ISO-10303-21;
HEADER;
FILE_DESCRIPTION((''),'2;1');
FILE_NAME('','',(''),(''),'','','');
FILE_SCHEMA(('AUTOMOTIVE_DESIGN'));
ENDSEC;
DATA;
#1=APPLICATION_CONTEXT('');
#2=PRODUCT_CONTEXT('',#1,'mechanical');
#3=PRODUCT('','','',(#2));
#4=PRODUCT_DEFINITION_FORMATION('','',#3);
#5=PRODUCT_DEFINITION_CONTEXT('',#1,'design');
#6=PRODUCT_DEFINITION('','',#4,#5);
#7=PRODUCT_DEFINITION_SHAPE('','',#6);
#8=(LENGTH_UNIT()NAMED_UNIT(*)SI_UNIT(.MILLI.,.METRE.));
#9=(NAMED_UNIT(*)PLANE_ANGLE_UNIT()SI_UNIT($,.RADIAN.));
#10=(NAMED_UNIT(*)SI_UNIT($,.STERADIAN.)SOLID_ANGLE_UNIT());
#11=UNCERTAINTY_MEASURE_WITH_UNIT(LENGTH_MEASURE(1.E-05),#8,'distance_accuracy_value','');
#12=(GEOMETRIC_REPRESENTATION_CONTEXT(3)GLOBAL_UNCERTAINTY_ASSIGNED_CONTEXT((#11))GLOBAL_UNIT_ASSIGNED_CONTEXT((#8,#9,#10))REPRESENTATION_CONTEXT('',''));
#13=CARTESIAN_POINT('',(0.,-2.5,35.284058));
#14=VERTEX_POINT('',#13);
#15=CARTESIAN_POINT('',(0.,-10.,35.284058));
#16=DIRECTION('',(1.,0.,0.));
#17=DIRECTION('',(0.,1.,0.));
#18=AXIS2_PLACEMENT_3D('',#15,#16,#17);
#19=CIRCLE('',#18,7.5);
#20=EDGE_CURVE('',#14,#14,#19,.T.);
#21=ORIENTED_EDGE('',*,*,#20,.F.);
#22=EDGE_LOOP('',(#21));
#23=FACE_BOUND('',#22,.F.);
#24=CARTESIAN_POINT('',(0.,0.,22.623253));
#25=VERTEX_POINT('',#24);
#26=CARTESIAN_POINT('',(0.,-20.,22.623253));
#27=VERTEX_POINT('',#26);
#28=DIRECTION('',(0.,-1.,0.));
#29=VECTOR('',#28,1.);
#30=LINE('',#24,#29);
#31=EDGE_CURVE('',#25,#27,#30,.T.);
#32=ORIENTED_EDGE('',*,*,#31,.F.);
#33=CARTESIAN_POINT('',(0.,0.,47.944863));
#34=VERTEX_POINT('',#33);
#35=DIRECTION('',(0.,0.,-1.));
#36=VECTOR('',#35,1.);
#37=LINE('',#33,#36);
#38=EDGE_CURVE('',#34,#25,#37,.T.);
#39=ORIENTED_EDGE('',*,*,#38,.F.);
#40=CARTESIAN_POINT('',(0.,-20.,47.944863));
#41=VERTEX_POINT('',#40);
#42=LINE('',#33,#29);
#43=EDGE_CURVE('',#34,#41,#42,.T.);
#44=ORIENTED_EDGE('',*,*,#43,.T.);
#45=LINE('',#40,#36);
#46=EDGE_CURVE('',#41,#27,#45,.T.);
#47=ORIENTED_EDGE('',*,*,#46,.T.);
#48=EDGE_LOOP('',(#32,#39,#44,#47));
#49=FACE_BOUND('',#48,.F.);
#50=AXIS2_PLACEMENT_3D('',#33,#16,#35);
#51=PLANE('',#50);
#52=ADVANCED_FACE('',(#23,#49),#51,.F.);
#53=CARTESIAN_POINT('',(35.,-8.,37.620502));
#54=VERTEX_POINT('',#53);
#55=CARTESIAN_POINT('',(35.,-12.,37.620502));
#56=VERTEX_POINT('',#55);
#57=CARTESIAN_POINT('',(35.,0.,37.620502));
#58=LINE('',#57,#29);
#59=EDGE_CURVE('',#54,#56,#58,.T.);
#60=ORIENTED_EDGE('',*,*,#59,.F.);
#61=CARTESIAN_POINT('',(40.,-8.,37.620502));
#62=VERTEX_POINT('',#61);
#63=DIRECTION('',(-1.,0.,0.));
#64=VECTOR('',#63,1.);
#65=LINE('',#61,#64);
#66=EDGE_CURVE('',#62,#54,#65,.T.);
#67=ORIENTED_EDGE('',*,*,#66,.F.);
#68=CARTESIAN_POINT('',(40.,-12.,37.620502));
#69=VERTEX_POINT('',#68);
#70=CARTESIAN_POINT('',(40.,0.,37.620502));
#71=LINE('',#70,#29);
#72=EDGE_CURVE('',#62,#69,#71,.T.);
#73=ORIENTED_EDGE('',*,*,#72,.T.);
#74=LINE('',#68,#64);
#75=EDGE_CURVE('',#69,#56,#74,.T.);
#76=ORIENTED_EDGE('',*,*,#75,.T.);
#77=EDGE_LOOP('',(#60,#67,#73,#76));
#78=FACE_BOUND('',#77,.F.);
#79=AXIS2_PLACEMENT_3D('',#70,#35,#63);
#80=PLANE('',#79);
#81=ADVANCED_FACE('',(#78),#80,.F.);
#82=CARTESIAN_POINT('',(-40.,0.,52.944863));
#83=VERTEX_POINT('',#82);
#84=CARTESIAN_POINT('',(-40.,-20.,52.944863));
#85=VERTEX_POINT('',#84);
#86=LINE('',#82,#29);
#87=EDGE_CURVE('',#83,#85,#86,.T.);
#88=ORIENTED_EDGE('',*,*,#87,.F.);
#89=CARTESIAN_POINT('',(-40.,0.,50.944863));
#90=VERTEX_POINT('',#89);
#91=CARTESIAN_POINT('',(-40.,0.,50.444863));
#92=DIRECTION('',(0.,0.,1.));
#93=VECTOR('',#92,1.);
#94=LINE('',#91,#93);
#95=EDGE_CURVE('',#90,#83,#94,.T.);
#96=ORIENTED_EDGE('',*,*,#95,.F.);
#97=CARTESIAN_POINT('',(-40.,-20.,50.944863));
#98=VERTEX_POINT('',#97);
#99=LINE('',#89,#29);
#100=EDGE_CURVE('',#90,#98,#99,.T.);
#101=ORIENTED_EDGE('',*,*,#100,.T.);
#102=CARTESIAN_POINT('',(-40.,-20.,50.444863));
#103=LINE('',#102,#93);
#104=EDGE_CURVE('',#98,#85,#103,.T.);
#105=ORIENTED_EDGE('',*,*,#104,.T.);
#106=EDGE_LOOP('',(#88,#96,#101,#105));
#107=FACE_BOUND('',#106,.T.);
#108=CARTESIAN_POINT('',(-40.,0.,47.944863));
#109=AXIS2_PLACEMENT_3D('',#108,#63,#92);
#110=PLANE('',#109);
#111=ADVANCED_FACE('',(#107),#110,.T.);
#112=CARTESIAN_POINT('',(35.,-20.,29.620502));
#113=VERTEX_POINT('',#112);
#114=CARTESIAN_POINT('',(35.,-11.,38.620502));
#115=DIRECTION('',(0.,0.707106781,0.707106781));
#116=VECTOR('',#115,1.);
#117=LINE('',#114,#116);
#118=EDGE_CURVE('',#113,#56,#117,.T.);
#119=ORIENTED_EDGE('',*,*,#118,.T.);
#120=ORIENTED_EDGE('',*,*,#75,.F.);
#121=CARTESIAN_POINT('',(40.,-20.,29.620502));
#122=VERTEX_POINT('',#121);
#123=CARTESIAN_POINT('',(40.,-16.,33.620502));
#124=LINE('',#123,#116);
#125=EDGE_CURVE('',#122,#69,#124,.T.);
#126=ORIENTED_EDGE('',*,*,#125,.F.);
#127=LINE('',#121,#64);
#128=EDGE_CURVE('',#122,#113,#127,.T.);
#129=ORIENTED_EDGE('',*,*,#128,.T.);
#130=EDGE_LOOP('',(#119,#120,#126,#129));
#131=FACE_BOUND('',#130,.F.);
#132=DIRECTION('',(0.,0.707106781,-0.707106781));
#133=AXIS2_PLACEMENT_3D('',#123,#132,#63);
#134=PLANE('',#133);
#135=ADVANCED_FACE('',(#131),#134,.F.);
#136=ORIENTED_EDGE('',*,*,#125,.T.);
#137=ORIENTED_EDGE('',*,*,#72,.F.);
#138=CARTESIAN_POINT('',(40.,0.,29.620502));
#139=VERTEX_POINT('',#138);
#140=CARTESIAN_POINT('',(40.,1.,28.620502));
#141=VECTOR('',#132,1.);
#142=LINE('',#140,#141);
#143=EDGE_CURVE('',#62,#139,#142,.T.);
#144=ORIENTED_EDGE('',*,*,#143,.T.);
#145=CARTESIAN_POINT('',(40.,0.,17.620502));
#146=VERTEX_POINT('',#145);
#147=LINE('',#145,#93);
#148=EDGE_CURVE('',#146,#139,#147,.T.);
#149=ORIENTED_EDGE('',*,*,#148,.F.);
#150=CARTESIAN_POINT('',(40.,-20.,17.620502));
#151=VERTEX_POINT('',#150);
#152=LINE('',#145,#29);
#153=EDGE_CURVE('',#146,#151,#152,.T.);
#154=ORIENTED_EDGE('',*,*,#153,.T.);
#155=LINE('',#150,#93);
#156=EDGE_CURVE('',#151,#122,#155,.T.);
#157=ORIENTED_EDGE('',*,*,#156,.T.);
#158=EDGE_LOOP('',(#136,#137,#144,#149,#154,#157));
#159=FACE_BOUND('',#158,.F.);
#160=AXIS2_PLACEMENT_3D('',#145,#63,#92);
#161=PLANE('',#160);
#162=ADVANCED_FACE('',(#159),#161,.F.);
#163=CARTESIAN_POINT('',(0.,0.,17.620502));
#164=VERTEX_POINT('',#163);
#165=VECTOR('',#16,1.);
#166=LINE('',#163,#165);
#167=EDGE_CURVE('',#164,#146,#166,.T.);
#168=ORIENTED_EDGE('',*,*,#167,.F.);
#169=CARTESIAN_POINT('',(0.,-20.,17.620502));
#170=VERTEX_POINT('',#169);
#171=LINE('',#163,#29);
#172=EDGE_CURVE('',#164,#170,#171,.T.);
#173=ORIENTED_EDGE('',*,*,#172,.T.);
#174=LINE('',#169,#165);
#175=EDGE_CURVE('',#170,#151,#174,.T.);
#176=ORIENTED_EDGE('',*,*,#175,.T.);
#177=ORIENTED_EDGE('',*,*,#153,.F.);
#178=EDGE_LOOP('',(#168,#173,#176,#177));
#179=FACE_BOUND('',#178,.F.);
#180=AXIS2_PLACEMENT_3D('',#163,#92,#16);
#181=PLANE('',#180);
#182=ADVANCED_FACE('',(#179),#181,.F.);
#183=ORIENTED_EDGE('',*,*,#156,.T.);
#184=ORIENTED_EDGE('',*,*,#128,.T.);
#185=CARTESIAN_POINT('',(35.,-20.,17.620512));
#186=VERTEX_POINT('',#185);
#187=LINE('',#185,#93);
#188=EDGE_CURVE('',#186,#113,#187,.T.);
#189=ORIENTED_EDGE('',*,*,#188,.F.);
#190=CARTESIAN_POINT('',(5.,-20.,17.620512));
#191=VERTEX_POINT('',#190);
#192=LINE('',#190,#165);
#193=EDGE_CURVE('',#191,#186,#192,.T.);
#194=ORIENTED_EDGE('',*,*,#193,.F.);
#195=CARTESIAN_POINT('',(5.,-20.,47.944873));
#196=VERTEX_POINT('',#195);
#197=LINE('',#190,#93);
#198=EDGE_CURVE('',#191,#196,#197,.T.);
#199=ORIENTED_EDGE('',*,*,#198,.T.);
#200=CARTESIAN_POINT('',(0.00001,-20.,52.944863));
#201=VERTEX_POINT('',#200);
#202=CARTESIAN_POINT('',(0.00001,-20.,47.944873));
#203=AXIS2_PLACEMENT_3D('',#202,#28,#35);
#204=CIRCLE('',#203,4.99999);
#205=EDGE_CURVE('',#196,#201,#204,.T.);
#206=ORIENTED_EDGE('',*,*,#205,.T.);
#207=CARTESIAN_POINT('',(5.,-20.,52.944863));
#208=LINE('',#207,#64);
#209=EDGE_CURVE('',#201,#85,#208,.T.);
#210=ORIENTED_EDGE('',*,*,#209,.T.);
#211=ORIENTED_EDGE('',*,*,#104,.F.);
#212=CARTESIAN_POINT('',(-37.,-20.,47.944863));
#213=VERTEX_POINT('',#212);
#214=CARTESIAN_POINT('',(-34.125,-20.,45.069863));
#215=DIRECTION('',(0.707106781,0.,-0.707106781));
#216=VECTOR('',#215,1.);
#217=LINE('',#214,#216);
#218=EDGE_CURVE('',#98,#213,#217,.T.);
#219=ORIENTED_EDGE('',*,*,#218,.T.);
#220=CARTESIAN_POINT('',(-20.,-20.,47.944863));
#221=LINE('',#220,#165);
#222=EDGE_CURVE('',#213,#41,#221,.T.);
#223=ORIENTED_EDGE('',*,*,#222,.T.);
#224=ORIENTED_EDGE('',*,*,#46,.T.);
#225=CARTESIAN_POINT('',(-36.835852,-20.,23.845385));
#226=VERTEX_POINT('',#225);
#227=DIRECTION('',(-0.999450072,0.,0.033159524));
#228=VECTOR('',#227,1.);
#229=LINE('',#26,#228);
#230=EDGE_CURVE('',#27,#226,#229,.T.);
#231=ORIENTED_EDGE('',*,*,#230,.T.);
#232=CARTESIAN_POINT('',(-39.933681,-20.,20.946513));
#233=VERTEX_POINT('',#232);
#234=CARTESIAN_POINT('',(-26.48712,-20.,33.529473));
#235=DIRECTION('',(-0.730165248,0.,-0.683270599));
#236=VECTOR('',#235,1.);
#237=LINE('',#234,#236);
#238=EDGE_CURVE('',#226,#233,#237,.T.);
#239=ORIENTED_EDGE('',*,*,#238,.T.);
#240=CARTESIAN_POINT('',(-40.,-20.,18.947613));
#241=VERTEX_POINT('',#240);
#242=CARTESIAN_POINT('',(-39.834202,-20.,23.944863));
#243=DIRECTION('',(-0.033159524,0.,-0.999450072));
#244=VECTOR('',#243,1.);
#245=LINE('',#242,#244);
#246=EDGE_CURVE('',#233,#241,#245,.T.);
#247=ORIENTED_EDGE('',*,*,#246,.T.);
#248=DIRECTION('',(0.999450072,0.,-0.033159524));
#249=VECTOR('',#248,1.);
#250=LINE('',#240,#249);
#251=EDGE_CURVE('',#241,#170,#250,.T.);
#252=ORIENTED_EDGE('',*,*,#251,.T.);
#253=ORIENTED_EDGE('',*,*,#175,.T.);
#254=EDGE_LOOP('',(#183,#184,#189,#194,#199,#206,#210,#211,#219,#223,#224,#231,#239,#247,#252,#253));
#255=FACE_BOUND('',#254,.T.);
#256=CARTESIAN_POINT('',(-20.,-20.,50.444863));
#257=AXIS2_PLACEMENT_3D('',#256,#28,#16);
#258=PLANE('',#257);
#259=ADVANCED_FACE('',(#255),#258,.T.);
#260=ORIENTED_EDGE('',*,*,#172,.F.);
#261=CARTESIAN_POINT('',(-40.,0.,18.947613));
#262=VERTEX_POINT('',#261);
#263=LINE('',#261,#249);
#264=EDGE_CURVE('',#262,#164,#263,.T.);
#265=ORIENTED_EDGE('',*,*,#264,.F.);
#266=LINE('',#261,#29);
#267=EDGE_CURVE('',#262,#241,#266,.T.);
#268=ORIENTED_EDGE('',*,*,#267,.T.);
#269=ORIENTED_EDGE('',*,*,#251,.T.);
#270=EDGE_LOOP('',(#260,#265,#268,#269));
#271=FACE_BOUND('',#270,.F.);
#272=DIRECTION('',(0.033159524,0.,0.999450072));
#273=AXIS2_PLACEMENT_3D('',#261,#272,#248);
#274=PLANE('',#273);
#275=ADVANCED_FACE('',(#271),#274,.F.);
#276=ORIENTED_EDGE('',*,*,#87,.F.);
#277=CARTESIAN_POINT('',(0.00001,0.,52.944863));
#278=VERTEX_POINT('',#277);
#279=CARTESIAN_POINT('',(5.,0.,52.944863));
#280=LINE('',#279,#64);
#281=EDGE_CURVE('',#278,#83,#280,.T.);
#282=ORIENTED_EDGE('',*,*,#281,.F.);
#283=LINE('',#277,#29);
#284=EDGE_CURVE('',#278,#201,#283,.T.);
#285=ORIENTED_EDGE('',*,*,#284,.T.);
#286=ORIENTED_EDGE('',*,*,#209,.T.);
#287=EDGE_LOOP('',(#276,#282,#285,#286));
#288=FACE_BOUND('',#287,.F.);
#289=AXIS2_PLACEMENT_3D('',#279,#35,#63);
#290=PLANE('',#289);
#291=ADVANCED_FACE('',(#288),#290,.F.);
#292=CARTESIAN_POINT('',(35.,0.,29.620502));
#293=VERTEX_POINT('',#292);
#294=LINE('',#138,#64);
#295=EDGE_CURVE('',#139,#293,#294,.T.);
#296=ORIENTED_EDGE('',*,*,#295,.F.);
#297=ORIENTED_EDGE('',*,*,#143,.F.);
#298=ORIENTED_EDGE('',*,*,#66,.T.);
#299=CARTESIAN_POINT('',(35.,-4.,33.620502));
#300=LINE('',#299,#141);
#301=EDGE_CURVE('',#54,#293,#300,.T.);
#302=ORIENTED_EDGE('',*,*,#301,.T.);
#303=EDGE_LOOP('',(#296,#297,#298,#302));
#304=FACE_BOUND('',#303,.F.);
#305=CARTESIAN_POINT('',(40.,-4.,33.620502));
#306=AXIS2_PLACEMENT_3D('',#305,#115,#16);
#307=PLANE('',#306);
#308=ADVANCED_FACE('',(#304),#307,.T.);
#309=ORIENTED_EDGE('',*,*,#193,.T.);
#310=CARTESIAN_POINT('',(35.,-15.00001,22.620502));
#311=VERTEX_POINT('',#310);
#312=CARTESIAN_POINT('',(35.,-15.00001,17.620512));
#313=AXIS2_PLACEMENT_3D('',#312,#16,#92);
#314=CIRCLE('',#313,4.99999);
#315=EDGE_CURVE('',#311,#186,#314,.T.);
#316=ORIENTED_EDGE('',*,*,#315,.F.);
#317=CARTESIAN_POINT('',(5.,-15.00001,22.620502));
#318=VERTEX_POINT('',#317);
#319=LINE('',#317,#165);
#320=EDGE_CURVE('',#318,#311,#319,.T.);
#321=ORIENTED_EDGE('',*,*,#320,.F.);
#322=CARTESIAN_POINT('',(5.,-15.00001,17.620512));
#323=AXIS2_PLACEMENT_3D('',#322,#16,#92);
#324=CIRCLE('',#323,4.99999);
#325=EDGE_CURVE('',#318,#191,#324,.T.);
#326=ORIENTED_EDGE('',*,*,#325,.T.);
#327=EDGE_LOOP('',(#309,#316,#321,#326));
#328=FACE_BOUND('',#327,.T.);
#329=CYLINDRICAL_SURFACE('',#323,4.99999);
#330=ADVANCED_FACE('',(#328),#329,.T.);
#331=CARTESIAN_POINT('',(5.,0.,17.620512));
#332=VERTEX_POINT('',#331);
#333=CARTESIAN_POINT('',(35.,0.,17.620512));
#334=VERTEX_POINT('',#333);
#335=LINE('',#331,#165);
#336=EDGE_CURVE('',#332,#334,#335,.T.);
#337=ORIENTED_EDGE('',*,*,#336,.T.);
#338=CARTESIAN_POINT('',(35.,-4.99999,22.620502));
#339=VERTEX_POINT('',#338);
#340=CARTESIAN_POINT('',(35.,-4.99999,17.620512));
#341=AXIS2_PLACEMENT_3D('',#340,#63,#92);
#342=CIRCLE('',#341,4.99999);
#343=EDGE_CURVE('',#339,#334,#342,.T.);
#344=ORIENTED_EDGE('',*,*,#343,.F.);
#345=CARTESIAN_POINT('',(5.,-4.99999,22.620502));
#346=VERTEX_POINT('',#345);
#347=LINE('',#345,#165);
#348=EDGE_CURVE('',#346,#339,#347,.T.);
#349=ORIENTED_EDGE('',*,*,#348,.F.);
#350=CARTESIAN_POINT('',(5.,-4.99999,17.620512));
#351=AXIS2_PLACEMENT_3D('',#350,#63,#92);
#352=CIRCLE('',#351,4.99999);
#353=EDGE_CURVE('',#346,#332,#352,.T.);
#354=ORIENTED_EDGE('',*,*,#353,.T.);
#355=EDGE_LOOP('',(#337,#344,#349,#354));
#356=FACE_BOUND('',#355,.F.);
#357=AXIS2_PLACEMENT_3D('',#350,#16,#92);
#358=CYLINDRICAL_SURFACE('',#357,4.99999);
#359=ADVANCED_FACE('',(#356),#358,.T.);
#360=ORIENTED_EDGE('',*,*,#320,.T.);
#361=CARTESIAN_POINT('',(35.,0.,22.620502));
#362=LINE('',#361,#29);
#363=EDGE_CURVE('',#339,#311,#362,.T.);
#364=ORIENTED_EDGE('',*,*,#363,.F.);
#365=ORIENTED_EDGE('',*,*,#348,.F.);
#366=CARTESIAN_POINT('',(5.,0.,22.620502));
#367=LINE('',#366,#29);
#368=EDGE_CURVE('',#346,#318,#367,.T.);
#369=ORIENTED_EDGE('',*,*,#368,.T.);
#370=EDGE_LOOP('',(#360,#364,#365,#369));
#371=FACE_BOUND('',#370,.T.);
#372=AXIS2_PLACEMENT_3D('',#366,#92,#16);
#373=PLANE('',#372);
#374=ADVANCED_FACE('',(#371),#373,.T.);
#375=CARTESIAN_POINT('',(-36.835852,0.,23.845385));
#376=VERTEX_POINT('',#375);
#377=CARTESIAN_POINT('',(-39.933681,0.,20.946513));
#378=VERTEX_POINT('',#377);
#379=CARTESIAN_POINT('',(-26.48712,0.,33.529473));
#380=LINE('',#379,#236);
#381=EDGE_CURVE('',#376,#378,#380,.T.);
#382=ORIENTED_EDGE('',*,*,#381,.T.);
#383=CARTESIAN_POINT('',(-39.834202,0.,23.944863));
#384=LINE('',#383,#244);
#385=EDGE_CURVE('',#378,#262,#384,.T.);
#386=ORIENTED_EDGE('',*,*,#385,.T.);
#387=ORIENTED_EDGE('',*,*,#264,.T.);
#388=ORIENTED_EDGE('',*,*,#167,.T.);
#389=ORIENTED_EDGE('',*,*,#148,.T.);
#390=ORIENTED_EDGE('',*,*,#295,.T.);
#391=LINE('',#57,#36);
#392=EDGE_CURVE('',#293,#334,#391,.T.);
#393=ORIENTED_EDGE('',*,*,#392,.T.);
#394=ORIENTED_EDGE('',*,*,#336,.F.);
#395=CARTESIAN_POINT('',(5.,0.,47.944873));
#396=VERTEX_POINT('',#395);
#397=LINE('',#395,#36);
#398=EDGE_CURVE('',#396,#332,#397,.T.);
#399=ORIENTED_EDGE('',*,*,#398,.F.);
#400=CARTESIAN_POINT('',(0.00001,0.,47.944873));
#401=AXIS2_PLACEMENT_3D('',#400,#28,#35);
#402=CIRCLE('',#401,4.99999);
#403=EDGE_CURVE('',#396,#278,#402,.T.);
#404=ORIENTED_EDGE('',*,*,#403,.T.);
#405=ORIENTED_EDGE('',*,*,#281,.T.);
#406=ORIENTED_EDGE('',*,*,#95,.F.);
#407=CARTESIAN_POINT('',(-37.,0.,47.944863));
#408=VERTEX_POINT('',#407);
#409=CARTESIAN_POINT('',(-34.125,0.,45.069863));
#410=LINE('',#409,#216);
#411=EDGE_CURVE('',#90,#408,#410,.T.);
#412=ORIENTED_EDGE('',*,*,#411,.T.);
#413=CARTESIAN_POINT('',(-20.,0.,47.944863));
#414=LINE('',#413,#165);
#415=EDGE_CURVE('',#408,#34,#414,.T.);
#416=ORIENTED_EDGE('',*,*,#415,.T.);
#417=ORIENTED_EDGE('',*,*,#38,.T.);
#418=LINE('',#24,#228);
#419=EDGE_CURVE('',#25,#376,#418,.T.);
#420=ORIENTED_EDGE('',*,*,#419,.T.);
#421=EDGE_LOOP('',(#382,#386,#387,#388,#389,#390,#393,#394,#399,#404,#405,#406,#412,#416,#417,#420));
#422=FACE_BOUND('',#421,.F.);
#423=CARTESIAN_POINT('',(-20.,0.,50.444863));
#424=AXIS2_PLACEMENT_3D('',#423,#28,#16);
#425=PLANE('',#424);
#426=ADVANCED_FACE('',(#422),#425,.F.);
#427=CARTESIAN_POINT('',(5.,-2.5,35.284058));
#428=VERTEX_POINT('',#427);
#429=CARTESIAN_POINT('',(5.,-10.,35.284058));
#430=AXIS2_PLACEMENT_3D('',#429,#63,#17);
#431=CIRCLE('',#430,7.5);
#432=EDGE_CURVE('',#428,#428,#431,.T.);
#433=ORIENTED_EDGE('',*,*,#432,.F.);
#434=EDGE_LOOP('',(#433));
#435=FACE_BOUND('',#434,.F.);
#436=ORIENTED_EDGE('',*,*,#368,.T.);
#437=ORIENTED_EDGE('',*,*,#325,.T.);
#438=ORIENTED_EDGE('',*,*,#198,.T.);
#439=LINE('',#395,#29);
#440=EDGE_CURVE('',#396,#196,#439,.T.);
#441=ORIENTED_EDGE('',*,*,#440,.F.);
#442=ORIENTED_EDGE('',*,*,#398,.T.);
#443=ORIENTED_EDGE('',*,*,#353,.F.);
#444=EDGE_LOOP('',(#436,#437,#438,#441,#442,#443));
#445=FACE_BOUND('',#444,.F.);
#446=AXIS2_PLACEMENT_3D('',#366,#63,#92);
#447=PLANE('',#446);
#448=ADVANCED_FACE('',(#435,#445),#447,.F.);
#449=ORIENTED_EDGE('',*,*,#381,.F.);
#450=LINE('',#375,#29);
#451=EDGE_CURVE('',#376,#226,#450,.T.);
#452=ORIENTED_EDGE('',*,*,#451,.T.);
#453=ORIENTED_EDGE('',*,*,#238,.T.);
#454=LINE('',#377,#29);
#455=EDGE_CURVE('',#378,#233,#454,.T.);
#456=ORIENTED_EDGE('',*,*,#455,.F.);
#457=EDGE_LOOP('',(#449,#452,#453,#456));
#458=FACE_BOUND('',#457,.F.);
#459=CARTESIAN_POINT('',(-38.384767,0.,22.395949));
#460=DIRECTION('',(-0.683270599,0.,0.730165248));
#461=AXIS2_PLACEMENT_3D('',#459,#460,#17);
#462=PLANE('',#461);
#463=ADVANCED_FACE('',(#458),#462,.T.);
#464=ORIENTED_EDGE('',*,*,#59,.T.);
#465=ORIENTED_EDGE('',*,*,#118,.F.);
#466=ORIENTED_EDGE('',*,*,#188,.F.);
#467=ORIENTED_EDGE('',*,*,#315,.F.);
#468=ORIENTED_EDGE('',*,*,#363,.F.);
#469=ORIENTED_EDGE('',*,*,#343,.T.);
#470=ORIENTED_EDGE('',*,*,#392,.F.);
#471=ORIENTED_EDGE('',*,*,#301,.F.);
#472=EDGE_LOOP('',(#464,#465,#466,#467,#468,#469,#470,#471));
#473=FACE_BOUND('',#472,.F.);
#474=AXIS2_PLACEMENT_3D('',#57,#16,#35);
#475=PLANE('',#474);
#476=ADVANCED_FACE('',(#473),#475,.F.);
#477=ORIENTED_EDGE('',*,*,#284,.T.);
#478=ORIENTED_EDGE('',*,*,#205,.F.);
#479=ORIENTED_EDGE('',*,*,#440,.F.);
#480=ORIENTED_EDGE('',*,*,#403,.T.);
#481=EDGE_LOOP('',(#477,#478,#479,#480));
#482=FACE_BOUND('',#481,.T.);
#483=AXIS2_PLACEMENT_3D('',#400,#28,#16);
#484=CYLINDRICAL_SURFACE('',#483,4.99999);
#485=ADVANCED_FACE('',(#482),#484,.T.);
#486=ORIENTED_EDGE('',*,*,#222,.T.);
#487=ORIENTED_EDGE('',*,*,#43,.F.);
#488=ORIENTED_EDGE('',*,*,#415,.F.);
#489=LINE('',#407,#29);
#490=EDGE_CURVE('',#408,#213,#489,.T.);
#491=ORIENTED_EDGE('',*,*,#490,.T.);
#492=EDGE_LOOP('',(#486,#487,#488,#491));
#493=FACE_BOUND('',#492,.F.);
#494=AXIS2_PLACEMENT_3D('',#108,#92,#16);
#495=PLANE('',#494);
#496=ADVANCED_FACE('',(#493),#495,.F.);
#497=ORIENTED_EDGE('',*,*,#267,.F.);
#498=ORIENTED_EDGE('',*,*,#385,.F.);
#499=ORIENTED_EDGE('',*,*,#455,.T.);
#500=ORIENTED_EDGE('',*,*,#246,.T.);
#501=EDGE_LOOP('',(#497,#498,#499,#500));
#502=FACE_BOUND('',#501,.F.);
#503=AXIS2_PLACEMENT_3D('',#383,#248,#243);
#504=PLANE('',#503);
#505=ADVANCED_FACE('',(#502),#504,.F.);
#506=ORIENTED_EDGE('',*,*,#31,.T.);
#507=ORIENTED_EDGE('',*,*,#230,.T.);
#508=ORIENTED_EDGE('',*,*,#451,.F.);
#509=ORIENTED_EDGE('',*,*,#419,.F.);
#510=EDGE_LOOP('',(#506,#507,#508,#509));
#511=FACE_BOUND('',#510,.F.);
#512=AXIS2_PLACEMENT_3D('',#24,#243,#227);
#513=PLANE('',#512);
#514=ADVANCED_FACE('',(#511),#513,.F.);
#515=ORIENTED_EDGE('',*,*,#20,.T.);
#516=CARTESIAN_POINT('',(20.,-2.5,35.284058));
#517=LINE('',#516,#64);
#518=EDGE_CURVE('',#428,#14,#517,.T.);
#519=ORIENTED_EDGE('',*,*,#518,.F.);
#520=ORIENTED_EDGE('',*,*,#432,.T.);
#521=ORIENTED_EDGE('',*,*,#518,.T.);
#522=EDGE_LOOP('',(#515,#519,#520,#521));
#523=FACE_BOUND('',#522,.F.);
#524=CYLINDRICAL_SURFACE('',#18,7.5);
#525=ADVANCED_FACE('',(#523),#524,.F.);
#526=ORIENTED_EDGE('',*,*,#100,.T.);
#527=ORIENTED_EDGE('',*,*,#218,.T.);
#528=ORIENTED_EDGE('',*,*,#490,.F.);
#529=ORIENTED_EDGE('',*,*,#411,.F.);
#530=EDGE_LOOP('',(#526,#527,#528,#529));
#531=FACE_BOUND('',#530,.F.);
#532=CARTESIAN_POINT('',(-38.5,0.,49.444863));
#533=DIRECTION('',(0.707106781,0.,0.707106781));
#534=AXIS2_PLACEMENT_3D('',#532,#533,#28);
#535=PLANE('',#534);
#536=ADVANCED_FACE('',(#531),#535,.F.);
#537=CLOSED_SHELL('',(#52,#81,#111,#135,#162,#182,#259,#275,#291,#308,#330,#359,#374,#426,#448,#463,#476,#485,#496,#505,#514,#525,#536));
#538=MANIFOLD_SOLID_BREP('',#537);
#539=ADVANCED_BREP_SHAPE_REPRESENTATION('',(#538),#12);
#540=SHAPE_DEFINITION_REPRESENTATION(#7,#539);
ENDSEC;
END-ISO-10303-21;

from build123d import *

# Parameters (mm, degrees)
F0_W           = 40
F0_H           = 5
F0_W_2         = 30
F1_DEPTH       = 20
F2_R           = 4.99999
F3_SIZE        = 3
F5_D           = 15
F5_DEPTH       = 20
F5_CBORE_D     = 15
F5_CBORE_DEPTH = 5
F5_TIP         = 4.5064546427
F6_SIZE        = 8


# Not quite as in the source:
# - a fillet or chamfer is up to 0.001 mm smaller than in the source, because OpenCascade refuses the exact size


with BuildPart() as f1:
    # F0 (on Front) → F1 (new body)
    with BuildSketch(Plane.XZ):
        with Locations((-20, 50.4448633795)):
            Rectangle(F0_W, F0_H)
        Polygon((5, 52.9448633795), (0, 52.9448633795), (0, 47.9448633795), (0, 22.6232533795), (0, 17.6205022253), (5, 17.6205022253), (5, 22.6205022253), align=None)
        Polygon((0, 17.6205022253), (0, 22.6232533795), (-39.8342023775, 23.9448633795), (-40, 18.9476130207), align=None)
        with Locations((20, 20.1205022253)):
            Rectangle(F0_W_2, F0_H)
        Polygon((35, 37.6205022253), (35, 22.6205022253), (35, 17.6205022253), (40, 17.6205022253), (40, 37.6205022253), align=None)
    extrude(amount=F1_DEPTH)

    # F2 (radius 5 in the source; OpenCascade refuses exactly that, so slightly less here)
    f2_edges = [f1.edges().sort_by_distance(p)[0] for p in [
        (20, -20, 22.620502),
        (20, 0, 22.620502),
        (5, -10, 52.944863),
    ]]
    fillet(f2_edges, radius=F2_R)

    # F3
    f3_edges = [f1.edges().sort_by_distance(p)[0] for p in [
        (-40, -10, 47.944863),
        (-39.834202, -10, 23.944863),
    ]]
    chamfer(f3_edges, length=F3_SIZE)

    # F5
    with Locations(Plane(origin=(0, 0, 0), x_dir=(0, -1, 0), z_dir=(-1, 0, 0))):
        with Locations((10, 35.2840583795)):
            CounterBoreHole(F5_D / 2, F5_CBORE_D / 2, F5_CBORE_DEPTH, depth=F5_DEPTH)
            with Locations((0, 0, -(F5_DEPTH + F5_TIP / 2))):  # 118° drill point
                Cone(0, F5_D / 2, F5_TIP, mode=Mode.SUBTRACT)

    # F6
    f6_edges = [f1.edges().sort_by_distance(p)[0] for p in [
        (37.5, 0, 37.620502),
        (37.5, -20, 37.620502),
    ]]
    chamfer(f6_edges, length=F6_SIZE)


solid = f1.part
